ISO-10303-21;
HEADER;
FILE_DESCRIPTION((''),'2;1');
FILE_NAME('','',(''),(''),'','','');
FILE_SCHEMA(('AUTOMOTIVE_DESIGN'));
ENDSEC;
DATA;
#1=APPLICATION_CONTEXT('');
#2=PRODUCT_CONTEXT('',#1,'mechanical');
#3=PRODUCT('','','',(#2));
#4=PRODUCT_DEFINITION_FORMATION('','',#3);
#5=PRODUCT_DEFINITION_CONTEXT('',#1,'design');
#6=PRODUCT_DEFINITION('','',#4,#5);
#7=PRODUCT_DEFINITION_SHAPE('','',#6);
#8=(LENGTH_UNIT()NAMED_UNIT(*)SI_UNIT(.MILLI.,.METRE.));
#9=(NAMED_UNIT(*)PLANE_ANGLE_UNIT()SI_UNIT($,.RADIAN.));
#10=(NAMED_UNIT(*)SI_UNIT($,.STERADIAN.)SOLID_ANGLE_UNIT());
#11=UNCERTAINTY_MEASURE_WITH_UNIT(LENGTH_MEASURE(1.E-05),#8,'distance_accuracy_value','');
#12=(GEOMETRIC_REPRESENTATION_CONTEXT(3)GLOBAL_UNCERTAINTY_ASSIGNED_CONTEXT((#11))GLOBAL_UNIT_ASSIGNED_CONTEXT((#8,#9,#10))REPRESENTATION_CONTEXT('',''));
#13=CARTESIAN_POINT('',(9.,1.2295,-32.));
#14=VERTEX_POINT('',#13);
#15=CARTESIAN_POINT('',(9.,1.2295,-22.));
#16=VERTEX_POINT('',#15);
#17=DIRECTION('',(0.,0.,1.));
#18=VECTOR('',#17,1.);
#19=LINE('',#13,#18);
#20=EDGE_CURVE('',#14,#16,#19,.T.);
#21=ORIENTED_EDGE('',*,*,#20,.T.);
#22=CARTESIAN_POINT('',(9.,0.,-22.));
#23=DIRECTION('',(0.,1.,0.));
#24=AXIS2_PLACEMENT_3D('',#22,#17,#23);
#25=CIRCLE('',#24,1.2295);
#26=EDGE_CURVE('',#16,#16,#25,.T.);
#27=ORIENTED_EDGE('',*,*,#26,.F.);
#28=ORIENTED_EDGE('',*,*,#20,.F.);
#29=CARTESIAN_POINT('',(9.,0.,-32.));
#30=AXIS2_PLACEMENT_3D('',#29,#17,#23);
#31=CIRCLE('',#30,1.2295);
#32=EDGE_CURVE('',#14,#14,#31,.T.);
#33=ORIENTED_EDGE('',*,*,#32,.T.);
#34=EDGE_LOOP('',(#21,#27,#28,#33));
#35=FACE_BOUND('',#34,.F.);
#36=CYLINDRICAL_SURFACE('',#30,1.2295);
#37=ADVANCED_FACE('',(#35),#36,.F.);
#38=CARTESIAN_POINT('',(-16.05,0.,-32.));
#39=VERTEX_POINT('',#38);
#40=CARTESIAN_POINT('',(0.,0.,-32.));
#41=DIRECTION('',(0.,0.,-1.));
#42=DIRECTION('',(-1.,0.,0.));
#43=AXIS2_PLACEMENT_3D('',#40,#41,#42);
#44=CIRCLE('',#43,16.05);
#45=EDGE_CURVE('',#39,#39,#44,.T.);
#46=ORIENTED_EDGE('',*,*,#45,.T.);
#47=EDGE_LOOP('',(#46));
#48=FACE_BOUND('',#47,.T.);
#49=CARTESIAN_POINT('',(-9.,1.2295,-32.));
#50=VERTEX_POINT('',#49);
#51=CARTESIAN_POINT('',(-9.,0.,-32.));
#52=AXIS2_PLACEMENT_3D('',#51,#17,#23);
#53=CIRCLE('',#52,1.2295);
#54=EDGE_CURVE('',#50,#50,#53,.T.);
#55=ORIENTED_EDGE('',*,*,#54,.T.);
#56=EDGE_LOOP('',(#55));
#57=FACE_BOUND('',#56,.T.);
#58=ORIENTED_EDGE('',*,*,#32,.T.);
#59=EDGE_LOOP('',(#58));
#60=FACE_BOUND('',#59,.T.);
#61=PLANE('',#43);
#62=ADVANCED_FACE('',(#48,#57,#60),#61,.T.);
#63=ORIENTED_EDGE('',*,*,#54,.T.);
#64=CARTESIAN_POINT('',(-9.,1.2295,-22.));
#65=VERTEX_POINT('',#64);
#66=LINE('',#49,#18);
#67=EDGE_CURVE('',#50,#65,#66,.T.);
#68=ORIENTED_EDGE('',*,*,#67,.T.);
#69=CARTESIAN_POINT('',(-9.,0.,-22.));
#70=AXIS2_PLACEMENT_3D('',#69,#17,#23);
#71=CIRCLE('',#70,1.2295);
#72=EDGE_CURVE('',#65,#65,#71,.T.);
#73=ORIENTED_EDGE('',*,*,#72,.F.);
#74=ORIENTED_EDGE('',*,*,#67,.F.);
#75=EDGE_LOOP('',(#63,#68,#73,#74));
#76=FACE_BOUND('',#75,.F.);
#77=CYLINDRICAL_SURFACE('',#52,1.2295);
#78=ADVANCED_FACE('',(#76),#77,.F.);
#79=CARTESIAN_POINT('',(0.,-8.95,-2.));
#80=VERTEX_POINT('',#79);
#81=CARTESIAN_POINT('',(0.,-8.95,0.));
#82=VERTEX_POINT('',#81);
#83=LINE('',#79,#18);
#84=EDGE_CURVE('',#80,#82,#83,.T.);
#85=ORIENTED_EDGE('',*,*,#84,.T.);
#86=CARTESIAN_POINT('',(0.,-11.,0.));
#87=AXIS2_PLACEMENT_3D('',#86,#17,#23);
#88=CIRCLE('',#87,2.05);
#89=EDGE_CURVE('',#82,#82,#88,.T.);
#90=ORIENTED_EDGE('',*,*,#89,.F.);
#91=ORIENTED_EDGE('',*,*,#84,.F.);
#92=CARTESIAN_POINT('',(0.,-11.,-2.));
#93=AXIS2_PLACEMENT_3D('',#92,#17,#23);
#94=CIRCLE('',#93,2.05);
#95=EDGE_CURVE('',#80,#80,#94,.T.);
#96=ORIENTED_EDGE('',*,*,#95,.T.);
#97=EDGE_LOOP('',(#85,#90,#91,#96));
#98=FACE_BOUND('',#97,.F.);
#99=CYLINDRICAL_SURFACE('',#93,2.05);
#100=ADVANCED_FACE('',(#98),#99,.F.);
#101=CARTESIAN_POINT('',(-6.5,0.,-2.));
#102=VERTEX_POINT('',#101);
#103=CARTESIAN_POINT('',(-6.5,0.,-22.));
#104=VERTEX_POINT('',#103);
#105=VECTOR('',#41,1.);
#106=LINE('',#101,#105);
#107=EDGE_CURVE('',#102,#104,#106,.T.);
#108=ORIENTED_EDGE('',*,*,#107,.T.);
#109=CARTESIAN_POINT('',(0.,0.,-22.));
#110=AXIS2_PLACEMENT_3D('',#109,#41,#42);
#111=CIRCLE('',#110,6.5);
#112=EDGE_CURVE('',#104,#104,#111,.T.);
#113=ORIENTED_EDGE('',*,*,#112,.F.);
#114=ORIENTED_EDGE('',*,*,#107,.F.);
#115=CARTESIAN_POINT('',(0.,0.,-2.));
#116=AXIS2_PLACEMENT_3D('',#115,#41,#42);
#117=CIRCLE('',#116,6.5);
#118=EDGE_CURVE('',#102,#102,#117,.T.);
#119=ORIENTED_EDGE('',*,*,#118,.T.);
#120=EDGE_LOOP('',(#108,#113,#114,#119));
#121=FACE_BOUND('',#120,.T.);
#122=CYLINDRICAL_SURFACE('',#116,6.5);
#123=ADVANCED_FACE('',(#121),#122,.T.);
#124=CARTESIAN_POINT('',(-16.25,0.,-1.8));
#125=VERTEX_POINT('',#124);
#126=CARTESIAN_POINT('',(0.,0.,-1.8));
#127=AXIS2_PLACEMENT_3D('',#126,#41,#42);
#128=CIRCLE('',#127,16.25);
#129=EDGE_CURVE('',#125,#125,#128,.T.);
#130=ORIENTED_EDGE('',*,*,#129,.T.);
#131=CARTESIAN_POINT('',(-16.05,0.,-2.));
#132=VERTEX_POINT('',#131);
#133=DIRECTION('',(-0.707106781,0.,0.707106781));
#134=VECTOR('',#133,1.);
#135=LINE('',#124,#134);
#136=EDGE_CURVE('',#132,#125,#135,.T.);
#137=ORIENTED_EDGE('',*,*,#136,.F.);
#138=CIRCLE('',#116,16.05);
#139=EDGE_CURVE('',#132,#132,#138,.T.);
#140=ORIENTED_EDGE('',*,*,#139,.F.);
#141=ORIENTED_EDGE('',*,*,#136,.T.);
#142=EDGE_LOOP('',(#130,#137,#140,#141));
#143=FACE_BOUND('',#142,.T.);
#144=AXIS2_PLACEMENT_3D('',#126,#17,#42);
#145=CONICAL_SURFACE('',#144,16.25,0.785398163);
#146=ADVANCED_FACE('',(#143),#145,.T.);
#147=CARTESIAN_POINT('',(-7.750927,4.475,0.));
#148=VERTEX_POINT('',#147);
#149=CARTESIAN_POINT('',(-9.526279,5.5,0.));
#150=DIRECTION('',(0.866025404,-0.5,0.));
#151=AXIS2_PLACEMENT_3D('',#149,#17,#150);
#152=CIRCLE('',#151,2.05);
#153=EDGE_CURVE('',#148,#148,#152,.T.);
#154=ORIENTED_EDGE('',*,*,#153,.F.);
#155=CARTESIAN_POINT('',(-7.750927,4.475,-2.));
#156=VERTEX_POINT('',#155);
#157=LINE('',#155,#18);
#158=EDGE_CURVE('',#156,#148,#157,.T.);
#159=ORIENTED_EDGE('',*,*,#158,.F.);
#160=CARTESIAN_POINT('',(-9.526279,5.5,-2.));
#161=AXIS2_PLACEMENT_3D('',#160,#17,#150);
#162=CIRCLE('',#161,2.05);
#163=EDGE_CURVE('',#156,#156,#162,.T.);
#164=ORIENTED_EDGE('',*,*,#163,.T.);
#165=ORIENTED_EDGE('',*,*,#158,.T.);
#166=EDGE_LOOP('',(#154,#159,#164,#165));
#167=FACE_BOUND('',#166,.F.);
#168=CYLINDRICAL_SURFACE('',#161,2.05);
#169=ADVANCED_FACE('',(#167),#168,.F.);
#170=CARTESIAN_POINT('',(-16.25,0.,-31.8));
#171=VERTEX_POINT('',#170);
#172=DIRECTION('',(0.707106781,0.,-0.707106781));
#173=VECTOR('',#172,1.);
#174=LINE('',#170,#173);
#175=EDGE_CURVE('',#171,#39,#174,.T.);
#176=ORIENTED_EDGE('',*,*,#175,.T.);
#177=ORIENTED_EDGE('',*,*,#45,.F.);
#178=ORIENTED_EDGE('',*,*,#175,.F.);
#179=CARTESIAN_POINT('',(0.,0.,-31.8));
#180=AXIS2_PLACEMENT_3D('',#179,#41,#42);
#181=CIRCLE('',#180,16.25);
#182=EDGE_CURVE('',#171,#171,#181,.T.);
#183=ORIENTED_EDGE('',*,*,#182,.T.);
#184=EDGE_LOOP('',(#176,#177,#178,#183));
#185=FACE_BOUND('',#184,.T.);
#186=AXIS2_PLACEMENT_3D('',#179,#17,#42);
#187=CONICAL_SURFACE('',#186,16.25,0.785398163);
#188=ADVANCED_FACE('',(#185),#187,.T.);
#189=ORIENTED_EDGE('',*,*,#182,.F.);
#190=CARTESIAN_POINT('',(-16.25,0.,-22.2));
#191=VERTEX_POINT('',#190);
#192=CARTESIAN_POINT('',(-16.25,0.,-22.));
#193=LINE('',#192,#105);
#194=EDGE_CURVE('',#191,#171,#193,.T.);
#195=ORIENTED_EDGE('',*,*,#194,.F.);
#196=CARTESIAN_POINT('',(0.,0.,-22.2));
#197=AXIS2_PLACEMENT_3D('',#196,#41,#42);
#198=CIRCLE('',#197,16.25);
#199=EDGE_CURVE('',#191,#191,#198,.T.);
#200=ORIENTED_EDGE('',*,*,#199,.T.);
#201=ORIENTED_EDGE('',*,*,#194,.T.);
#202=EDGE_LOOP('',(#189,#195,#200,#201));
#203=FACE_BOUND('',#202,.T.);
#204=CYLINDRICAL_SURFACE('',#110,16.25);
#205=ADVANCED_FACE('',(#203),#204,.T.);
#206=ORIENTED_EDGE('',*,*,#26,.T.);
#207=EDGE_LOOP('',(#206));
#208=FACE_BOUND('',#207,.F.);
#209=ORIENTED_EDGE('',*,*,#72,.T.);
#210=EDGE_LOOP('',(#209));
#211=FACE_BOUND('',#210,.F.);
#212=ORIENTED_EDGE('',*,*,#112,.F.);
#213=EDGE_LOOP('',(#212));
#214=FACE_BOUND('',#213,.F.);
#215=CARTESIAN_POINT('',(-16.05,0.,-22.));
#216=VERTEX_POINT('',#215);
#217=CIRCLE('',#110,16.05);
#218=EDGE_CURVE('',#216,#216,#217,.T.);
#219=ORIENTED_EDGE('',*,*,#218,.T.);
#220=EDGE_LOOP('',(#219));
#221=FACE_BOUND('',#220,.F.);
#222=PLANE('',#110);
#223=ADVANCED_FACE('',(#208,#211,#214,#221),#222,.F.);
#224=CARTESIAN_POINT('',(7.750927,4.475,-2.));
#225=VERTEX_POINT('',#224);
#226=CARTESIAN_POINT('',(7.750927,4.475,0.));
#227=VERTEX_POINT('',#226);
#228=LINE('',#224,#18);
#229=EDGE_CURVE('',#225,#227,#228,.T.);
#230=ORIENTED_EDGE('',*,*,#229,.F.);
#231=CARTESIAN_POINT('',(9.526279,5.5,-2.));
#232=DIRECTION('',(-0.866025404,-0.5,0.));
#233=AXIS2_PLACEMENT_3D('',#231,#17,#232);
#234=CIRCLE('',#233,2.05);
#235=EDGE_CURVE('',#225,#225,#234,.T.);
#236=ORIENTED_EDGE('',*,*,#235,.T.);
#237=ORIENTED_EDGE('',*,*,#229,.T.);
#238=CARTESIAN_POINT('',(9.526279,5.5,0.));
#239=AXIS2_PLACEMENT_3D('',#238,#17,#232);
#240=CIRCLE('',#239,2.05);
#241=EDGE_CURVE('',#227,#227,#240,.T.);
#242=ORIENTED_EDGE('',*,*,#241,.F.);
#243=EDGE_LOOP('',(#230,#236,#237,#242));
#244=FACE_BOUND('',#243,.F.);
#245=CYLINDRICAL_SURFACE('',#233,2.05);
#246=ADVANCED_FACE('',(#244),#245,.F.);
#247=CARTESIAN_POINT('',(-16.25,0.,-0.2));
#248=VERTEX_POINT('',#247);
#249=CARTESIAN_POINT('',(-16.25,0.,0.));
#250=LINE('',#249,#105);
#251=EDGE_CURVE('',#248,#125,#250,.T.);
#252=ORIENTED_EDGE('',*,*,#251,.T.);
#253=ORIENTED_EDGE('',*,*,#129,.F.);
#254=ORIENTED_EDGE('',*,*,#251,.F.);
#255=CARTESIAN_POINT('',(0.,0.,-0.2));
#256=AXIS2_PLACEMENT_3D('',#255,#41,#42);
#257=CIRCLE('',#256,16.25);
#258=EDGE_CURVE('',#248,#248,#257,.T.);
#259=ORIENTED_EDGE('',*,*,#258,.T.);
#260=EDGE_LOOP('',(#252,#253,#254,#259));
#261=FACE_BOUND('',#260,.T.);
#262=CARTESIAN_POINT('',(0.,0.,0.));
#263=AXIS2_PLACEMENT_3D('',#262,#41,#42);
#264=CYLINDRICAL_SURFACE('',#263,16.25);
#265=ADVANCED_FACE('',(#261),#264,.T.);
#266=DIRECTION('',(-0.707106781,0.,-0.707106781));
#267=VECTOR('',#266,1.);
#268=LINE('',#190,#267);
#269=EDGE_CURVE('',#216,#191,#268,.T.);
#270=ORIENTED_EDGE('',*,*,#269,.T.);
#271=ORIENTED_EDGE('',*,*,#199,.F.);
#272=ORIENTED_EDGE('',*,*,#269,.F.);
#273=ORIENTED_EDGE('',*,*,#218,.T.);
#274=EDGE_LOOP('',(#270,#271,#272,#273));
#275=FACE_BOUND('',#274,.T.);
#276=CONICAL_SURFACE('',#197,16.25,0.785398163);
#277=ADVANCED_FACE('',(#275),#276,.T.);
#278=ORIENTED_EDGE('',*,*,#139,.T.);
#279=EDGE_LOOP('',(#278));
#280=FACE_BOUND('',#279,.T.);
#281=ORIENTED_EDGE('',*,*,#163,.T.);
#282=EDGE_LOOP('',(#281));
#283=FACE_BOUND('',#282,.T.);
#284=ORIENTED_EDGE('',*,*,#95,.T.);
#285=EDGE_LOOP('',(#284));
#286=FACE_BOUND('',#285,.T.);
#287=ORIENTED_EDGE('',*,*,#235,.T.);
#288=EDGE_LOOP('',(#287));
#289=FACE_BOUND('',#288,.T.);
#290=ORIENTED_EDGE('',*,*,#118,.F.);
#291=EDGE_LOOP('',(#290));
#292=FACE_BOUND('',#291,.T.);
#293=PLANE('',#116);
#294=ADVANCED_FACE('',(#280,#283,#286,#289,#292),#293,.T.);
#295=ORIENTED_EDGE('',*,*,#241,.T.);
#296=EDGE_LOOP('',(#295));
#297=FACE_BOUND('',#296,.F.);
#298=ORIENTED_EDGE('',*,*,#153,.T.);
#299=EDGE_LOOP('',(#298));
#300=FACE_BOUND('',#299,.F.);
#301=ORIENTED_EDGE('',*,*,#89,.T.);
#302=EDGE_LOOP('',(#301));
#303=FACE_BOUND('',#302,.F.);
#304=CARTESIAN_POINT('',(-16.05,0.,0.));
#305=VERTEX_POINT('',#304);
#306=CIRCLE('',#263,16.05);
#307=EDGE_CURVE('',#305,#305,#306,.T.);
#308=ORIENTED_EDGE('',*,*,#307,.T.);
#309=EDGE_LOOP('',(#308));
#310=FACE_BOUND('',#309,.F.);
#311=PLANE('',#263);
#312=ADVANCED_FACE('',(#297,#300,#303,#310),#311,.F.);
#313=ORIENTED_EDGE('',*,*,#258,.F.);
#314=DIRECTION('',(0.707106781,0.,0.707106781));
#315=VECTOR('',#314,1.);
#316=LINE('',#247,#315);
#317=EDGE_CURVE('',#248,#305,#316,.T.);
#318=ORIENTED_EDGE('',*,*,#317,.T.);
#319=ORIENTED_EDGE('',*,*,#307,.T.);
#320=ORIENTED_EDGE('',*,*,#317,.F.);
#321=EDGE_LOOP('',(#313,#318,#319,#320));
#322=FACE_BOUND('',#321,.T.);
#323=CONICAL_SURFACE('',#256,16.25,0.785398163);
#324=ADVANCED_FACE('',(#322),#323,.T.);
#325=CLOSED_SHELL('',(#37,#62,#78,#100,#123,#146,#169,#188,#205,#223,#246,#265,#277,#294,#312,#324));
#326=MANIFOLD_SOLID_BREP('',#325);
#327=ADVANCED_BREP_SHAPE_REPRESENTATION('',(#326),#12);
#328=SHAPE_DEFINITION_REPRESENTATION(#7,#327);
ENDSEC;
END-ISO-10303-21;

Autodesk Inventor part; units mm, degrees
ref_plane "YZ Plane" through (0, 0, 0) normal (1, 0, 0) x (0, 1, 0)
ref_plane "XZ Plane" through (0, 0, 0) normal (0, 1, 0) x (-1, 0, 0)
ref_plane "XY Plane" through (0, 0, 0) normal (0, 0, 1) x (1, 0, 0)
sketch "Sketch1" plane through (0, 0, 0) normal (0, 1, 0) x (-1, 0, 0)
  line L0 (6.5, -2) -> (6.5, -22)
  line L1 (16.25, -22) -> (16.25, -32)
  line L2 (16.25, 0) -> (16.25, -2)
  line L3 (0, 0) -> (0, -32)
  line L4 (16.25, 0) -> (0, 0)
  line L5 (16.25, -2) -> (6.5, -2)
  line L6 (16.25, -22) -> (6.5, -22)
  line L7 (16.25, -32) -> (0, -32)
  point P0 (0, 26.9125)
  point P1 (0, -16.1673)
  point P2 (0, 6.9125)
  point P3 (0, -16)
  dimension "d19" = 20
  dimension "d20" = 10
  dimension "d21" = 2
  dimension "d22" = 32.5
  dimension "d23" = 13
  dimension "d24" = 32.5
revolve "Revolution1" add sketch "Sketch1" angle 360 about axis through (0, 0, 0) along (0, 0, -1)
sketch "Sketch3" plane through (0, 0, -2) normal (0, 0, -1) x (-1, 0, 0)
  circle A0 centre (0, 0) radius 11 construction
  point P0 (0, -11)
  dimension "d25" = 22
hole "Hole2" at (0, -11, -2) direction (0, 0, 1) diameter 4.1 end through all
pattern_circular "Circular Pattern2" count 3 over 360 about axis through (0, 0, -10) along (0, 0, 1) of "Hole2"
sketch "Sketch4" plane through (0, 0, -32) normal (0, 0, -1) x (-1, 0, 0)
  line L0 (9, 0) -> (-9, 0) construction
  point P0 (0, 0)
  point P1 (0, 0)
  dimension "d36" = 18
hole "Hole3" at (-9, 0, -32) at (9, 0, -32) direction (0, 0, 1) diameter 2.459 depth 10 thread size "M3x0.5" class "6H" standard "ANSI Metric M Profile"
chamfer "Chamfer1" distance 0.2 angle 45 4 edges at (16.25, 0, -32) (16.25, 0, -22) (16.25, 0, -2) (16.25, 0, 0)
equation "\"d23\" = stockid"
equation "\"d25\" = holesid"
equation "\"holesid\" = 22"
equation "\"stockid\" = 13"
properties part number "HayashiProbeHead" material "Stainless Steel"
